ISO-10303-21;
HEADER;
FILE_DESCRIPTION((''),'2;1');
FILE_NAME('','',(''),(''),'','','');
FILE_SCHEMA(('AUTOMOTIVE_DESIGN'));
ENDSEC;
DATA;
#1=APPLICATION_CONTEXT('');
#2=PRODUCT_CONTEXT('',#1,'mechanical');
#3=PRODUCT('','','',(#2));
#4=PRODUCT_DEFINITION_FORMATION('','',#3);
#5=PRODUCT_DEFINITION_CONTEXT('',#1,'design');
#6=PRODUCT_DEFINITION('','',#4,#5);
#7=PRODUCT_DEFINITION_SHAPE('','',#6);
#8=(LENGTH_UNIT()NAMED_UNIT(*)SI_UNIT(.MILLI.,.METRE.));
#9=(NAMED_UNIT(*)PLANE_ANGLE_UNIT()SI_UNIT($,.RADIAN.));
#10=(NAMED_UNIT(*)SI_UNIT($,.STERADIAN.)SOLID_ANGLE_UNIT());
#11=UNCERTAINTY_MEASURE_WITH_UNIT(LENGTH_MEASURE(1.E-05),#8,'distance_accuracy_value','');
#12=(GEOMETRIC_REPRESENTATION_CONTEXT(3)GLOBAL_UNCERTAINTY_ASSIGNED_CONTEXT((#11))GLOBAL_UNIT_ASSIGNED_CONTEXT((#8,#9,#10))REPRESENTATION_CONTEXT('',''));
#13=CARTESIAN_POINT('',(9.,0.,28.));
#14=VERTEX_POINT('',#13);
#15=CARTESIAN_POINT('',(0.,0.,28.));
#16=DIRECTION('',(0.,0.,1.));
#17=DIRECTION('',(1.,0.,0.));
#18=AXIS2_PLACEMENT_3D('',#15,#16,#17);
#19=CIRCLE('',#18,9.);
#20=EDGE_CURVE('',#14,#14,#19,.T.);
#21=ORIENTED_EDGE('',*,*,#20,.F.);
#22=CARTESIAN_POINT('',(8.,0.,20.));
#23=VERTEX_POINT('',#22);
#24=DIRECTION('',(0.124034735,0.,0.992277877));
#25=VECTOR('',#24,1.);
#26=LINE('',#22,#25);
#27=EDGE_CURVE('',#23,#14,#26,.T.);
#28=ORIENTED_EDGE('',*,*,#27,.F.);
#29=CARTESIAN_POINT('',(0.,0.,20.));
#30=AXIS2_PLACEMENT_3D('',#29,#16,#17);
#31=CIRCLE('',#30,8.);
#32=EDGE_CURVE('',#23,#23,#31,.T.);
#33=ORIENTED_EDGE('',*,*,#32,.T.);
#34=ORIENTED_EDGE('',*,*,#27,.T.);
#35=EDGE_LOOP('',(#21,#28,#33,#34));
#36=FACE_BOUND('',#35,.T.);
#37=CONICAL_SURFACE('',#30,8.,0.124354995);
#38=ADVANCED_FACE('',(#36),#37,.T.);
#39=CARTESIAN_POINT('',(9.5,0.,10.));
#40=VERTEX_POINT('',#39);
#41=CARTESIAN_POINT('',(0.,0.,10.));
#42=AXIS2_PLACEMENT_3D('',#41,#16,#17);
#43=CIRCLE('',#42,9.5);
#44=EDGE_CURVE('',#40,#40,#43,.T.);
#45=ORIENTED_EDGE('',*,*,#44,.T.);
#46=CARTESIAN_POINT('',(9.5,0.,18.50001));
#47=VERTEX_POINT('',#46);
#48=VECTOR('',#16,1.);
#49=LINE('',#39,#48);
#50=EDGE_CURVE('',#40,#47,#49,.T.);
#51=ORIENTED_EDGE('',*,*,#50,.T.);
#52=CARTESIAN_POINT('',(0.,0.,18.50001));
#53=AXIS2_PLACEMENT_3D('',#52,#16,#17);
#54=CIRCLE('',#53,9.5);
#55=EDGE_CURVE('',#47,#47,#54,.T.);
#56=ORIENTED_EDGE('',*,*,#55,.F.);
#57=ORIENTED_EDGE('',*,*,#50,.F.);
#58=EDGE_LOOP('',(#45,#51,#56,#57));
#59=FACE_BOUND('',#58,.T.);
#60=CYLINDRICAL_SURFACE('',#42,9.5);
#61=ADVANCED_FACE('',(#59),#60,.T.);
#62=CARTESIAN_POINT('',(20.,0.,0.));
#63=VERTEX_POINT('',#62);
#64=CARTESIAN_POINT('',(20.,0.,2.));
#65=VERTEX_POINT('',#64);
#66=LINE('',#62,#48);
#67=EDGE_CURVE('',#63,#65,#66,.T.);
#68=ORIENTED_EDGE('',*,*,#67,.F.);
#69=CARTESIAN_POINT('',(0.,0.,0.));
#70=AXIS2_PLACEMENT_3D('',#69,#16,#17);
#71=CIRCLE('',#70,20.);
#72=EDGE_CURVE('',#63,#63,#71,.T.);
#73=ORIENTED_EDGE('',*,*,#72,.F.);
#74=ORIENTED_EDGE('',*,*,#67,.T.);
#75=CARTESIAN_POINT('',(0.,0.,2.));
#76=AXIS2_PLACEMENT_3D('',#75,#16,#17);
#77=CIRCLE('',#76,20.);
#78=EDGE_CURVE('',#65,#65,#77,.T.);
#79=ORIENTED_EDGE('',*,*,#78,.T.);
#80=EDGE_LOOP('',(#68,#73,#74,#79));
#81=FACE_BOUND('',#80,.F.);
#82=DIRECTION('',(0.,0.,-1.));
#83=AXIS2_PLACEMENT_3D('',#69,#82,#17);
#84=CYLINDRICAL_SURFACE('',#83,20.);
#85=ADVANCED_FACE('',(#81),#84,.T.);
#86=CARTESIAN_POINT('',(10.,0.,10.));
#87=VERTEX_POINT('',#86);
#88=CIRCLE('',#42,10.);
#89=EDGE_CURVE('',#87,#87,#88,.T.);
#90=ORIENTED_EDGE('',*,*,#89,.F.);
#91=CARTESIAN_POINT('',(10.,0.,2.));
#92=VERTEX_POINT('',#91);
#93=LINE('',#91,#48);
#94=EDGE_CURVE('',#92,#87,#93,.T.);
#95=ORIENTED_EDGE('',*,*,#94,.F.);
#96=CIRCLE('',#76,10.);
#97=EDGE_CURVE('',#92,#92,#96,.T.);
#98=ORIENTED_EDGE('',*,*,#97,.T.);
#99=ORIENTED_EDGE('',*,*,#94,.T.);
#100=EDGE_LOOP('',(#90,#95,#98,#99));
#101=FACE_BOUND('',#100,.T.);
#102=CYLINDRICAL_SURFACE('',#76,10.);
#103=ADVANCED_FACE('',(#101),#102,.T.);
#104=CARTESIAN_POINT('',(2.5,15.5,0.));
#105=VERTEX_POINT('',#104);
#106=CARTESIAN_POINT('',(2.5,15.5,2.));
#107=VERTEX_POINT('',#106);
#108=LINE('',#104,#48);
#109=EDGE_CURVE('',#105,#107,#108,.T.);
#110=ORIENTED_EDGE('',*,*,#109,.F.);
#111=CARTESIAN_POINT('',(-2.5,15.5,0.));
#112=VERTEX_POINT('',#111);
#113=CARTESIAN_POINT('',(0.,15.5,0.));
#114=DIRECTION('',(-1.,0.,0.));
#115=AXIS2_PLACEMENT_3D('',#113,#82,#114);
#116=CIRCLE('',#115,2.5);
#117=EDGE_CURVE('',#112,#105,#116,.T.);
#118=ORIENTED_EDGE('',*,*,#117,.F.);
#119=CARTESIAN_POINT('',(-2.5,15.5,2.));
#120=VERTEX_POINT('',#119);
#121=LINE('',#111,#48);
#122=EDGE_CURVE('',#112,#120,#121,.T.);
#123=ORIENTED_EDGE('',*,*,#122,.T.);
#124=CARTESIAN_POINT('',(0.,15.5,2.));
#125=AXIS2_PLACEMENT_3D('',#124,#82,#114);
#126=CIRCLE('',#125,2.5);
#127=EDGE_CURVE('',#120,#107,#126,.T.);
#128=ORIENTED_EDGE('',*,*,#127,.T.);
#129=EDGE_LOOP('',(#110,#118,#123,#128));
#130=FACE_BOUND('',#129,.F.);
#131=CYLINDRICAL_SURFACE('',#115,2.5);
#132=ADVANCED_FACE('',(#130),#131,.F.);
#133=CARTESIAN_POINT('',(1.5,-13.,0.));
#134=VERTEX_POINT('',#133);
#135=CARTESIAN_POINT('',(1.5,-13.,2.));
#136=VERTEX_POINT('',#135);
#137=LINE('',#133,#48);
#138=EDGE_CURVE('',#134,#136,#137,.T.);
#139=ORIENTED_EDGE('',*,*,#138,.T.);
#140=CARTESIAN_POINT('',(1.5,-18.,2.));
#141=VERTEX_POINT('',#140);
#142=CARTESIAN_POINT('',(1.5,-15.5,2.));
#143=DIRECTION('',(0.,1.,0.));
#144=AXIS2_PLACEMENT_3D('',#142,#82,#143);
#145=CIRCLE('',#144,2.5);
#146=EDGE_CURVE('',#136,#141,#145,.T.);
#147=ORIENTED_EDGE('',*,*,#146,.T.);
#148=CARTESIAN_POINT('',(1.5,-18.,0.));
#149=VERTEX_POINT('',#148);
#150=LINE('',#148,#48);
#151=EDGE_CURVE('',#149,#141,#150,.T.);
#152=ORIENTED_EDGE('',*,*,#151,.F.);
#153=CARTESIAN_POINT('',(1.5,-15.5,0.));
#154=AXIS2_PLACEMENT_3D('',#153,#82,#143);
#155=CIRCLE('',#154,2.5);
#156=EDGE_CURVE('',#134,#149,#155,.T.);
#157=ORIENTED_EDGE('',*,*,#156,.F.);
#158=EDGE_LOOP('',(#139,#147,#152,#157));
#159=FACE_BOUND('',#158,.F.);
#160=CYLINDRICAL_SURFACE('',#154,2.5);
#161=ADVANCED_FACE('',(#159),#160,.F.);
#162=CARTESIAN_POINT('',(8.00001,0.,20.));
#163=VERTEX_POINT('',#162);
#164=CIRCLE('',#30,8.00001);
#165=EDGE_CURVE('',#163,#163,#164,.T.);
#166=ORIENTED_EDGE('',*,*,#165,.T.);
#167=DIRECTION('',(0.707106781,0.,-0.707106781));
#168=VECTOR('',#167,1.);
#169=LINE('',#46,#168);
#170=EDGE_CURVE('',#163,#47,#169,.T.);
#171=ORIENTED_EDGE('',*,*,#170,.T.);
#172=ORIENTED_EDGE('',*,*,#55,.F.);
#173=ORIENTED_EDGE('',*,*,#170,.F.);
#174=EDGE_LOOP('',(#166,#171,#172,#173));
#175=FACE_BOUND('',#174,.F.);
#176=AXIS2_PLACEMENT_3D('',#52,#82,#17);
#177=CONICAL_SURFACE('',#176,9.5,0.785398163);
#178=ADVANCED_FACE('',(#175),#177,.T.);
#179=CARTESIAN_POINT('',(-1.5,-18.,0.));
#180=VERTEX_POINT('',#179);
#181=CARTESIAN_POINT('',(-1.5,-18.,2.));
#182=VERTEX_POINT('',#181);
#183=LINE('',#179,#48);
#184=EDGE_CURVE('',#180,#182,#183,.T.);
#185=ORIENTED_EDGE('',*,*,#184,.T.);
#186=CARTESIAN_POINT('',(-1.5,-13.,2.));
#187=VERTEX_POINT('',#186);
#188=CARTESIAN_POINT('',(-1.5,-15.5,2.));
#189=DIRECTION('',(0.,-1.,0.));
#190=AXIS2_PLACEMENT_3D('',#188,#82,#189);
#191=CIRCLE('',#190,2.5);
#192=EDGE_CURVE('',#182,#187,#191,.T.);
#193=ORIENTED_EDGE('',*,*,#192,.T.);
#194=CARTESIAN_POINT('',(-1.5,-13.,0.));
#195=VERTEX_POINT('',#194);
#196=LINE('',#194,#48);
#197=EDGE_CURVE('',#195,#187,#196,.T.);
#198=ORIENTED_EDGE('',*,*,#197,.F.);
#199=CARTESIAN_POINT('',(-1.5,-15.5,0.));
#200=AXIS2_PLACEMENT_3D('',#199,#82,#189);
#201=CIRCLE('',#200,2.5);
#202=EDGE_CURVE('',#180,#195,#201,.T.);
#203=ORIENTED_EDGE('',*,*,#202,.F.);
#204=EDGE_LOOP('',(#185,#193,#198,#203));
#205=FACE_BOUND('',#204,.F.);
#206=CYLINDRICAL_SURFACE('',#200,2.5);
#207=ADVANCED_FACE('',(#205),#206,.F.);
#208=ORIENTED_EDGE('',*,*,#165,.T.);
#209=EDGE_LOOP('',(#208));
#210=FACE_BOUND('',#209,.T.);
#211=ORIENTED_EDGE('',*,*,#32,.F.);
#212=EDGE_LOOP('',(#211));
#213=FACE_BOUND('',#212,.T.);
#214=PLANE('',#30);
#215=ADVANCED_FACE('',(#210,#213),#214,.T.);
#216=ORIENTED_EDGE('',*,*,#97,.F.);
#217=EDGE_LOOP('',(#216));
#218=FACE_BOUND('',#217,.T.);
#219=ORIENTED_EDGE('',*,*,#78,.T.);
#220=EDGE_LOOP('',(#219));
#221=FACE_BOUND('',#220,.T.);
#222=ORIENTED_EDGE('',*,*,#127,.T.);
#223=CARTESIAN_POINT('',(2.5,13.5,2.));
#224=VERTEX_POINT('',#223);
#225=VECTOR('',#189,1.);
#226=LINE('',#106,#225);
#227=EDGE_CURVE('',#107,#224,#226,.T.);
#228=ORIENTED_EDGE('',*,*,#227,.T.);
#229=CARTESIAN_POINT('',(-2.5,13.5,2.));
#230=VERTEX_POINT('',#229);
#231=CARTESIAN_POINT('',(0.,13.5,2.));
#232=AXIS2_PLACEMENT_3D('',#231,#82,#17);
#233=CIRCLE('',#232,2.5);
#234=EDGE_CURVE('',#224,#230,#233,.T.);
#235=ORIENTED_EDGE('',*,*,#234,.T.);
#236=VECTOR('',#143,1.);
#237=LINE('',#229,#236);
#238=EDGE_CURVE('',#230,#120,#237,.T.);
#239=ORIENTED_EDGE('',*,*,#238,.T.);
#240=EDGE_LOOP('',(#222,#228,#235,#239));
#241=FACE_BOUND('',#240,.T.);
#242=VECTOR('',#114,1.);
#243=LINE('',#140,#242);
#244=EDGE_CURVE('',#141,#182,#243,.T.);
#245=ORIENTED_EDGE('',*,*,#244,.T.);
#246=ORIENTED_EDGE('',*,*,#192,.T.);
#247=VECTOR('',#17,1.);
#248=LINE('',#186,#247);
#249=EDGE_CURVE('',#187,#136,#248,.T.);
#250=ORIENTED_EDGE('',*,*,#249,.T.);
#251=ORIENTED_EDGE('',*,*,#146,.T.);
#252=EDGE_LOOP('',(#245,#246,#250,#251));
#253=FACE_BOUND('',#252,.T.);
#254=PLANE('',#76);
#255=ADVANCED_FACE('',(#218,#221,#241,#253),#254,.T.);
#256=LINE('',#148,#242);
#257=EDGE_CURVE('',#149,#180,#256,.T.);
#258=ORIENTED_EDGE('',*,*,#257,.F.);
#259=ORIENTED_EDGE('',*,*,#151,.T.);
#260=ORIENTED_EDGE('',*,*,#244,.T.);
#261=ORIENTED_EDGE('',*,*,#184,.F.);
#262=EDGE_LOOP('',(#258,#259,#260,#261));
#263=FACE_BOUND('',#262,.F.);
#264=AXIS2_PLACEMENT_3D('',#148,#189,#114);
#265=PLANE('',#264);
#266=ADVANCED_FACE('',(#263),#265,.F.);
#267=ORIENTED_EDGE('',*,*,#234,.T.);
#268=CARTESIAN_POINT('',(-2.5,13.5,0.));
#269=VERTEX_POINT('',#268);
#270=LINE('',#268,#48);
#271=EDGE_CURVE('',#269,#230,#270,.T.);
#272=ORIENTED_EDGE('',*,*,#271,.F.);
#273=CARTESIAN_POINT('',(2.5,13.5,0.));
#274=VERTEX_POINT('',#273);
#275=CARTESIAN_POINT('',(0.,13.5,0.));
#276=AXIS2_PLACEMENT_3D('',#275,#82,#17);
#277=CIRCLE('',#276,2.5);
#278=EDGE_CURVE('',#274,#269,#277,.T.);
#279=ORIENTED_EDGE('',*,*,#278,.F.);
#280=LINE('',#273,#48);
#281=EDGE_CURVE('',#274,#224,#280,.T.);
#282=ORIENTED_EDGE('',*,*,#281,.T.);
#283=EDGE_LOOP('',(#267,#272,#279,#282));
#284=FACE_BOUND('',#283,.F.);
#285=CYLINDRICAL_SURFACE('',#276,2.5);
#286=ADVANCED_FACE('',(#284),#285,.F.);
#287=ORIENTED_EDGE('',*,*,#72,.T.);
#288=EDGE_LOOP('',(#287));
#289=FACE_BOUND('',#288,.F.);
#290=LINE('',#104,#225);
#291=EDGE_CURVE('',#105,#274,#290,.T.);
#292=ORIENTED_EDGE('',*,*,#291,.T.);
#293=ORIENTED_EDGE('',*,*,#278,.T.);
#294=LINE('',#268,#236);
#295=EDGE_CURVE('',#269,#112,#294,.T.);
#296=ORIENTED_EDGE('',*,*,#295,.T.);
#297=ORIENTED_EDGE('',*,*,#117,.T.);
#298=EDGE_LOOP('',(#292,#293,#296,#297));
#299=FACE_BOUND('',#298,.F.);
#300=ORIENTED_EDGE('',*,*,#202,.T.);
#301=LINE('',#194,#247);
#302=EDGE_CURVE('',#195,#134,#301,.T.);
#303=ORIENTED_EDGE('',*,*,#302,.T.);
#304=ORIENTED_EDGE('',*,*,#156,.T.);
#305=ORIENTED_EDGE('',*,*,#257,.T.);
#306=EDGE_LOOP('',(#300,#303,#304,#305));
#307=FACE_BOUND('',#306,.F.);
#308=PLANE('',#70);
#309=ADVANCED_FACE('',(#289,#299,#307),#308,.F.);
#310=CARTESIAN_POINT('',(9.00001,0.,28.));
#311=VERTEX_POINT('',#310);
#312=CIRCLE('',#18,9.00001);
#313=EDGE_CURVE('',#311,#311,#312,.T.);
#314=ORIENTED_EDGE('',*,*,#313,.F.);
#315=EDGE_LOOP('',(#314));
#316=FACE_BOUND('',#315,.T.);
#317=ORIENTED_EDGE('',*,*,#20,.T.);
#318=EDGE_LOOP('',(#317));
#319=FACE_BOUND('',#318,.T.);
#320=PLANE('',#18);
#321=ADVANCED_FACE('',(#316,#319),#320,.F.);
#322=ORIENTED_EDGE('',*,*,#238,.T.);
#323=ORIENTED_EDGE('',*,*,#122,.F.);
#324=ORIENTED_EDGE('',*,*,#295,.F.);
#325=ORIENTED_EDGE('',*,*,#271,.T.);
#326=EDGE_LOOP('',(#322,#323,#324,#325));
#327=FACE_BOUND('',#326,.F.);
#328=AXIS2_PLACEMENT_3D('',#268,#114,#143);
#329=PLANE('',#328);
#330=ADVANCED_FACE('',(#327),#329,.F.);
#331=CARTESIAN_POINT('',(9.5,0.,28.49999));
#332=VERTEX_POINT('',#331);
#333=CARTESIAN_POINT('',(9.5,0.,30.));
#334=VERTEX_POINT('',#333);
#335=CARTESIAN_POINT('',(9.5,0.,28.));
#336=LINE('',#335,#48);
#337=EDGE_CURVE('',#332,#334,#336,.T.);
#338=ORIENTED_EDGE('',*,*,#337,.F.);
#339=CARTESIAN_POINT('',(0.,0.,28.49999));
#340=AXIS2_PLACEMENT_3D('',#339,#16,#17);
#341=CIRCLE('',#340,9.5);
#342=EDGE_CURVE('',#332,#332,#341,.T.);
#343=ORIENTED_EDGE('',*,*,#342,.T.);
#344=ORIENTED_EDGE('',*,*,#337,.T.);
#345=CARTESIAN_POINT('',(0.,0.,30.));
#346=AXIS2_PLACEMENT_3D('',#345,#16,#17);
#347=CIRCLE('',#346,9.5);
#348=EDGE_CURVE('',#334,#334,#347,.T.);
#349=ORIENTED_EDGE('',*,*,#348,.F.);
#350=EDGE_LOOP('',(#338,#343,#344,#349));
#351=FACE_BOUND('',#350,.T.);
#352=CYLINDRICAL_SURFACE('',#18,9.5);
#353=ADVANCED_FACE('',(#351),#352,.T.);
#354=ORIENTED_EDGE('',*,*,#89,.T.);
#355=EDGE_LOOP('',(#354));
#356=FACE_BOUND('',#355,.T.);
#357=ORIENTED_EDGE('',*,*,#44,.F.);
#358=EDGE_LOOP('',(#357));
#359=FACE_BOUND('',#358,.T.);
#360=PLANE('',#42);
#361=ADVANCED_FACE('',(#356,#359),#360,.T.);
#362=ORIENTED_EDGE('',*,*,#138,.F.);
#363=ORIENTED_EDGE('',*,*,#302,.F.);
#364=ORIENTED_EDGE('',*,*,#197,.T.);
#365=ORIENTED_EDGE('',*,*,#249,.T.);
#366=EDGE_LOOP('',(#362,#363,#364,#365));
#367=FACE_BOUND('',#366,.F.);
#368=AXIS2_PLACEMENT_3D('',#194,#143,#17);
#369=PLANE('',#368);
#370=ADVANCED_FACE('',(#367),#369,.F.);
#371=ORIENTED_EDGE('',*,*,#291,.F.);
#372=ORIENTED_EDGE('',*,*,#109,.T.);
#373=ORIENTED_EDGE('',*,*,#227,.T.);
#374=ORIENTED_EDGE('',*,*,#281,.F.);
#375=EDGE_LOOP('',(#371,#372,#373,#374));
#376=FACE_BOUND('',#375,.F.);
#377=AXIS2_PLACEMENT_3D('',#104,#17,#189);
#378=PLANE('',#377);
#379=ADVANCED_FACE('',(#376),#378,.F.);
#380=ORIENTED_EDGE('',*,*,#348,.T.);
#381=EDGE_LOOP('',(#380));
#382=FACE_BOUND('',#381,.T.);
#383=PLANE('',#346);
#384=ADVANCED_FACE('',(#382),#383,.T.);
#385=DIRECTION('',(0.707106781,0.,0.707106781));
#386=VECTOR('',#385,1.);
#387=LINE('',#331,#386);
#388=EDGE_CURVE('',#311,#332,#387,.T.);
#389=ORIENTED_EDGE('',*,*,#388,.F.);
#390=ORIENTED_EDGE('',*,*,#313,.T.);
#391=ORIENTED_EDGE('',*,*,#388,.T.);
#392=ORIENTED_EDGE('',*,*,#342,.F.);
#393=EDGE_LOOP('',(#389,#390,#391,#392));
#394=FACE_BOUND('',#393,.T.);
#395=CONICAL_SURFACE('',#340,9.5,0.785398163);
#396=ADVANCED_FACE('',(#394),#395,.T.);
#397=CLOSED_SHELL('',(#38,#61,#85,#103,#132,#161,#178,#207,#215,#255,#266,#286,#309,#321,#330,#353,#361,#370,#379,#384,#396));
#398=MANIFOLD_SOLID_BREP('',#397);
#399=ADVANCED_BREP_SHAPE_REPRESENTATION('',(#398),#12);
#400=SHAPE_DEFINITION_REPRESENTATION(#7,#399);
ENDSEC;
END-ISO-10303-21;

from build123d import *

# Parameters (mm, degrees)
F0_R     = 20
F1_DEPTH = 2
F4_SIZE  = 0.49999
F5_SIZE  = 1.49999


# Not quite as in the source:
# - a fillet or chamfer is up to 0.001 mm smaller than in the source, because OpenCascade refuses the exact size


with BuildPart() as f1:
    # F0 (on Top) → F1 (new body)
    with BuildSketch(Plane.XY):
        Circle(F0_R)
        with BuildLine():
            Line((-1.5, -13), (1.5, -13))
            ThreePointArc((1.5, -13), (4, -15.5), (1.5, -18))
            Line((1.5, -18), (-1.5, -18))
            ThreePointArc((-1.5, -18), (-4, -15.5), (-1.5, -13))
        make_face(mode=Mode.SUBTRACT)
        with BuildLine():
            ThreePointArc((2.5, 13.5), (0, 11), (-2.5, 13.5))
            Line((-2.5, 13.5), (-2.5, 15.5))
            ThreePointArc((-2.5, 15.5), (0, 18), (2.5, 15.5))
            Line((2.5, 15.5), (2.5, 13.5))
        make_face(mode=Mode.SUBTRACT)
    extrude(amount=F1_DEPTH)

    # F2 (on Front) → F3 (revolve)
    with BuildSketch(Plane.XZ):
        Polygon((0, 30), (0, 2), (10, 2), (10, 10), (9.5, 10), (9.5, 20), (8, 20), (9, 28), (9.5, 28), (9.5, 30), align=None)
    revolve(axis=Axis((0, 0, 44.0067852139), (0, 0, 1)))

    # F4 (size 0.5 in the source; OpenCascade refuses exactly that, so slightly less here)
    f4_edges = [f1.edges().sort_by_distance(p)[0] for p in [
        (-9.5, 0, 28),
    ]]
    chamfer(f4_edges, length=F4_SIZE)

    # F5 (size 1.5 in the source; OpenCascade refuses exactly that, so slightly less here)
    f5_edges = [f1.edges().sort_by_distance(p)[0] for p in [
        (-9.5, 0, 20),
    ]]
    chamfer(f5_edges, length=F5_SIZE)


solid = f1.part
